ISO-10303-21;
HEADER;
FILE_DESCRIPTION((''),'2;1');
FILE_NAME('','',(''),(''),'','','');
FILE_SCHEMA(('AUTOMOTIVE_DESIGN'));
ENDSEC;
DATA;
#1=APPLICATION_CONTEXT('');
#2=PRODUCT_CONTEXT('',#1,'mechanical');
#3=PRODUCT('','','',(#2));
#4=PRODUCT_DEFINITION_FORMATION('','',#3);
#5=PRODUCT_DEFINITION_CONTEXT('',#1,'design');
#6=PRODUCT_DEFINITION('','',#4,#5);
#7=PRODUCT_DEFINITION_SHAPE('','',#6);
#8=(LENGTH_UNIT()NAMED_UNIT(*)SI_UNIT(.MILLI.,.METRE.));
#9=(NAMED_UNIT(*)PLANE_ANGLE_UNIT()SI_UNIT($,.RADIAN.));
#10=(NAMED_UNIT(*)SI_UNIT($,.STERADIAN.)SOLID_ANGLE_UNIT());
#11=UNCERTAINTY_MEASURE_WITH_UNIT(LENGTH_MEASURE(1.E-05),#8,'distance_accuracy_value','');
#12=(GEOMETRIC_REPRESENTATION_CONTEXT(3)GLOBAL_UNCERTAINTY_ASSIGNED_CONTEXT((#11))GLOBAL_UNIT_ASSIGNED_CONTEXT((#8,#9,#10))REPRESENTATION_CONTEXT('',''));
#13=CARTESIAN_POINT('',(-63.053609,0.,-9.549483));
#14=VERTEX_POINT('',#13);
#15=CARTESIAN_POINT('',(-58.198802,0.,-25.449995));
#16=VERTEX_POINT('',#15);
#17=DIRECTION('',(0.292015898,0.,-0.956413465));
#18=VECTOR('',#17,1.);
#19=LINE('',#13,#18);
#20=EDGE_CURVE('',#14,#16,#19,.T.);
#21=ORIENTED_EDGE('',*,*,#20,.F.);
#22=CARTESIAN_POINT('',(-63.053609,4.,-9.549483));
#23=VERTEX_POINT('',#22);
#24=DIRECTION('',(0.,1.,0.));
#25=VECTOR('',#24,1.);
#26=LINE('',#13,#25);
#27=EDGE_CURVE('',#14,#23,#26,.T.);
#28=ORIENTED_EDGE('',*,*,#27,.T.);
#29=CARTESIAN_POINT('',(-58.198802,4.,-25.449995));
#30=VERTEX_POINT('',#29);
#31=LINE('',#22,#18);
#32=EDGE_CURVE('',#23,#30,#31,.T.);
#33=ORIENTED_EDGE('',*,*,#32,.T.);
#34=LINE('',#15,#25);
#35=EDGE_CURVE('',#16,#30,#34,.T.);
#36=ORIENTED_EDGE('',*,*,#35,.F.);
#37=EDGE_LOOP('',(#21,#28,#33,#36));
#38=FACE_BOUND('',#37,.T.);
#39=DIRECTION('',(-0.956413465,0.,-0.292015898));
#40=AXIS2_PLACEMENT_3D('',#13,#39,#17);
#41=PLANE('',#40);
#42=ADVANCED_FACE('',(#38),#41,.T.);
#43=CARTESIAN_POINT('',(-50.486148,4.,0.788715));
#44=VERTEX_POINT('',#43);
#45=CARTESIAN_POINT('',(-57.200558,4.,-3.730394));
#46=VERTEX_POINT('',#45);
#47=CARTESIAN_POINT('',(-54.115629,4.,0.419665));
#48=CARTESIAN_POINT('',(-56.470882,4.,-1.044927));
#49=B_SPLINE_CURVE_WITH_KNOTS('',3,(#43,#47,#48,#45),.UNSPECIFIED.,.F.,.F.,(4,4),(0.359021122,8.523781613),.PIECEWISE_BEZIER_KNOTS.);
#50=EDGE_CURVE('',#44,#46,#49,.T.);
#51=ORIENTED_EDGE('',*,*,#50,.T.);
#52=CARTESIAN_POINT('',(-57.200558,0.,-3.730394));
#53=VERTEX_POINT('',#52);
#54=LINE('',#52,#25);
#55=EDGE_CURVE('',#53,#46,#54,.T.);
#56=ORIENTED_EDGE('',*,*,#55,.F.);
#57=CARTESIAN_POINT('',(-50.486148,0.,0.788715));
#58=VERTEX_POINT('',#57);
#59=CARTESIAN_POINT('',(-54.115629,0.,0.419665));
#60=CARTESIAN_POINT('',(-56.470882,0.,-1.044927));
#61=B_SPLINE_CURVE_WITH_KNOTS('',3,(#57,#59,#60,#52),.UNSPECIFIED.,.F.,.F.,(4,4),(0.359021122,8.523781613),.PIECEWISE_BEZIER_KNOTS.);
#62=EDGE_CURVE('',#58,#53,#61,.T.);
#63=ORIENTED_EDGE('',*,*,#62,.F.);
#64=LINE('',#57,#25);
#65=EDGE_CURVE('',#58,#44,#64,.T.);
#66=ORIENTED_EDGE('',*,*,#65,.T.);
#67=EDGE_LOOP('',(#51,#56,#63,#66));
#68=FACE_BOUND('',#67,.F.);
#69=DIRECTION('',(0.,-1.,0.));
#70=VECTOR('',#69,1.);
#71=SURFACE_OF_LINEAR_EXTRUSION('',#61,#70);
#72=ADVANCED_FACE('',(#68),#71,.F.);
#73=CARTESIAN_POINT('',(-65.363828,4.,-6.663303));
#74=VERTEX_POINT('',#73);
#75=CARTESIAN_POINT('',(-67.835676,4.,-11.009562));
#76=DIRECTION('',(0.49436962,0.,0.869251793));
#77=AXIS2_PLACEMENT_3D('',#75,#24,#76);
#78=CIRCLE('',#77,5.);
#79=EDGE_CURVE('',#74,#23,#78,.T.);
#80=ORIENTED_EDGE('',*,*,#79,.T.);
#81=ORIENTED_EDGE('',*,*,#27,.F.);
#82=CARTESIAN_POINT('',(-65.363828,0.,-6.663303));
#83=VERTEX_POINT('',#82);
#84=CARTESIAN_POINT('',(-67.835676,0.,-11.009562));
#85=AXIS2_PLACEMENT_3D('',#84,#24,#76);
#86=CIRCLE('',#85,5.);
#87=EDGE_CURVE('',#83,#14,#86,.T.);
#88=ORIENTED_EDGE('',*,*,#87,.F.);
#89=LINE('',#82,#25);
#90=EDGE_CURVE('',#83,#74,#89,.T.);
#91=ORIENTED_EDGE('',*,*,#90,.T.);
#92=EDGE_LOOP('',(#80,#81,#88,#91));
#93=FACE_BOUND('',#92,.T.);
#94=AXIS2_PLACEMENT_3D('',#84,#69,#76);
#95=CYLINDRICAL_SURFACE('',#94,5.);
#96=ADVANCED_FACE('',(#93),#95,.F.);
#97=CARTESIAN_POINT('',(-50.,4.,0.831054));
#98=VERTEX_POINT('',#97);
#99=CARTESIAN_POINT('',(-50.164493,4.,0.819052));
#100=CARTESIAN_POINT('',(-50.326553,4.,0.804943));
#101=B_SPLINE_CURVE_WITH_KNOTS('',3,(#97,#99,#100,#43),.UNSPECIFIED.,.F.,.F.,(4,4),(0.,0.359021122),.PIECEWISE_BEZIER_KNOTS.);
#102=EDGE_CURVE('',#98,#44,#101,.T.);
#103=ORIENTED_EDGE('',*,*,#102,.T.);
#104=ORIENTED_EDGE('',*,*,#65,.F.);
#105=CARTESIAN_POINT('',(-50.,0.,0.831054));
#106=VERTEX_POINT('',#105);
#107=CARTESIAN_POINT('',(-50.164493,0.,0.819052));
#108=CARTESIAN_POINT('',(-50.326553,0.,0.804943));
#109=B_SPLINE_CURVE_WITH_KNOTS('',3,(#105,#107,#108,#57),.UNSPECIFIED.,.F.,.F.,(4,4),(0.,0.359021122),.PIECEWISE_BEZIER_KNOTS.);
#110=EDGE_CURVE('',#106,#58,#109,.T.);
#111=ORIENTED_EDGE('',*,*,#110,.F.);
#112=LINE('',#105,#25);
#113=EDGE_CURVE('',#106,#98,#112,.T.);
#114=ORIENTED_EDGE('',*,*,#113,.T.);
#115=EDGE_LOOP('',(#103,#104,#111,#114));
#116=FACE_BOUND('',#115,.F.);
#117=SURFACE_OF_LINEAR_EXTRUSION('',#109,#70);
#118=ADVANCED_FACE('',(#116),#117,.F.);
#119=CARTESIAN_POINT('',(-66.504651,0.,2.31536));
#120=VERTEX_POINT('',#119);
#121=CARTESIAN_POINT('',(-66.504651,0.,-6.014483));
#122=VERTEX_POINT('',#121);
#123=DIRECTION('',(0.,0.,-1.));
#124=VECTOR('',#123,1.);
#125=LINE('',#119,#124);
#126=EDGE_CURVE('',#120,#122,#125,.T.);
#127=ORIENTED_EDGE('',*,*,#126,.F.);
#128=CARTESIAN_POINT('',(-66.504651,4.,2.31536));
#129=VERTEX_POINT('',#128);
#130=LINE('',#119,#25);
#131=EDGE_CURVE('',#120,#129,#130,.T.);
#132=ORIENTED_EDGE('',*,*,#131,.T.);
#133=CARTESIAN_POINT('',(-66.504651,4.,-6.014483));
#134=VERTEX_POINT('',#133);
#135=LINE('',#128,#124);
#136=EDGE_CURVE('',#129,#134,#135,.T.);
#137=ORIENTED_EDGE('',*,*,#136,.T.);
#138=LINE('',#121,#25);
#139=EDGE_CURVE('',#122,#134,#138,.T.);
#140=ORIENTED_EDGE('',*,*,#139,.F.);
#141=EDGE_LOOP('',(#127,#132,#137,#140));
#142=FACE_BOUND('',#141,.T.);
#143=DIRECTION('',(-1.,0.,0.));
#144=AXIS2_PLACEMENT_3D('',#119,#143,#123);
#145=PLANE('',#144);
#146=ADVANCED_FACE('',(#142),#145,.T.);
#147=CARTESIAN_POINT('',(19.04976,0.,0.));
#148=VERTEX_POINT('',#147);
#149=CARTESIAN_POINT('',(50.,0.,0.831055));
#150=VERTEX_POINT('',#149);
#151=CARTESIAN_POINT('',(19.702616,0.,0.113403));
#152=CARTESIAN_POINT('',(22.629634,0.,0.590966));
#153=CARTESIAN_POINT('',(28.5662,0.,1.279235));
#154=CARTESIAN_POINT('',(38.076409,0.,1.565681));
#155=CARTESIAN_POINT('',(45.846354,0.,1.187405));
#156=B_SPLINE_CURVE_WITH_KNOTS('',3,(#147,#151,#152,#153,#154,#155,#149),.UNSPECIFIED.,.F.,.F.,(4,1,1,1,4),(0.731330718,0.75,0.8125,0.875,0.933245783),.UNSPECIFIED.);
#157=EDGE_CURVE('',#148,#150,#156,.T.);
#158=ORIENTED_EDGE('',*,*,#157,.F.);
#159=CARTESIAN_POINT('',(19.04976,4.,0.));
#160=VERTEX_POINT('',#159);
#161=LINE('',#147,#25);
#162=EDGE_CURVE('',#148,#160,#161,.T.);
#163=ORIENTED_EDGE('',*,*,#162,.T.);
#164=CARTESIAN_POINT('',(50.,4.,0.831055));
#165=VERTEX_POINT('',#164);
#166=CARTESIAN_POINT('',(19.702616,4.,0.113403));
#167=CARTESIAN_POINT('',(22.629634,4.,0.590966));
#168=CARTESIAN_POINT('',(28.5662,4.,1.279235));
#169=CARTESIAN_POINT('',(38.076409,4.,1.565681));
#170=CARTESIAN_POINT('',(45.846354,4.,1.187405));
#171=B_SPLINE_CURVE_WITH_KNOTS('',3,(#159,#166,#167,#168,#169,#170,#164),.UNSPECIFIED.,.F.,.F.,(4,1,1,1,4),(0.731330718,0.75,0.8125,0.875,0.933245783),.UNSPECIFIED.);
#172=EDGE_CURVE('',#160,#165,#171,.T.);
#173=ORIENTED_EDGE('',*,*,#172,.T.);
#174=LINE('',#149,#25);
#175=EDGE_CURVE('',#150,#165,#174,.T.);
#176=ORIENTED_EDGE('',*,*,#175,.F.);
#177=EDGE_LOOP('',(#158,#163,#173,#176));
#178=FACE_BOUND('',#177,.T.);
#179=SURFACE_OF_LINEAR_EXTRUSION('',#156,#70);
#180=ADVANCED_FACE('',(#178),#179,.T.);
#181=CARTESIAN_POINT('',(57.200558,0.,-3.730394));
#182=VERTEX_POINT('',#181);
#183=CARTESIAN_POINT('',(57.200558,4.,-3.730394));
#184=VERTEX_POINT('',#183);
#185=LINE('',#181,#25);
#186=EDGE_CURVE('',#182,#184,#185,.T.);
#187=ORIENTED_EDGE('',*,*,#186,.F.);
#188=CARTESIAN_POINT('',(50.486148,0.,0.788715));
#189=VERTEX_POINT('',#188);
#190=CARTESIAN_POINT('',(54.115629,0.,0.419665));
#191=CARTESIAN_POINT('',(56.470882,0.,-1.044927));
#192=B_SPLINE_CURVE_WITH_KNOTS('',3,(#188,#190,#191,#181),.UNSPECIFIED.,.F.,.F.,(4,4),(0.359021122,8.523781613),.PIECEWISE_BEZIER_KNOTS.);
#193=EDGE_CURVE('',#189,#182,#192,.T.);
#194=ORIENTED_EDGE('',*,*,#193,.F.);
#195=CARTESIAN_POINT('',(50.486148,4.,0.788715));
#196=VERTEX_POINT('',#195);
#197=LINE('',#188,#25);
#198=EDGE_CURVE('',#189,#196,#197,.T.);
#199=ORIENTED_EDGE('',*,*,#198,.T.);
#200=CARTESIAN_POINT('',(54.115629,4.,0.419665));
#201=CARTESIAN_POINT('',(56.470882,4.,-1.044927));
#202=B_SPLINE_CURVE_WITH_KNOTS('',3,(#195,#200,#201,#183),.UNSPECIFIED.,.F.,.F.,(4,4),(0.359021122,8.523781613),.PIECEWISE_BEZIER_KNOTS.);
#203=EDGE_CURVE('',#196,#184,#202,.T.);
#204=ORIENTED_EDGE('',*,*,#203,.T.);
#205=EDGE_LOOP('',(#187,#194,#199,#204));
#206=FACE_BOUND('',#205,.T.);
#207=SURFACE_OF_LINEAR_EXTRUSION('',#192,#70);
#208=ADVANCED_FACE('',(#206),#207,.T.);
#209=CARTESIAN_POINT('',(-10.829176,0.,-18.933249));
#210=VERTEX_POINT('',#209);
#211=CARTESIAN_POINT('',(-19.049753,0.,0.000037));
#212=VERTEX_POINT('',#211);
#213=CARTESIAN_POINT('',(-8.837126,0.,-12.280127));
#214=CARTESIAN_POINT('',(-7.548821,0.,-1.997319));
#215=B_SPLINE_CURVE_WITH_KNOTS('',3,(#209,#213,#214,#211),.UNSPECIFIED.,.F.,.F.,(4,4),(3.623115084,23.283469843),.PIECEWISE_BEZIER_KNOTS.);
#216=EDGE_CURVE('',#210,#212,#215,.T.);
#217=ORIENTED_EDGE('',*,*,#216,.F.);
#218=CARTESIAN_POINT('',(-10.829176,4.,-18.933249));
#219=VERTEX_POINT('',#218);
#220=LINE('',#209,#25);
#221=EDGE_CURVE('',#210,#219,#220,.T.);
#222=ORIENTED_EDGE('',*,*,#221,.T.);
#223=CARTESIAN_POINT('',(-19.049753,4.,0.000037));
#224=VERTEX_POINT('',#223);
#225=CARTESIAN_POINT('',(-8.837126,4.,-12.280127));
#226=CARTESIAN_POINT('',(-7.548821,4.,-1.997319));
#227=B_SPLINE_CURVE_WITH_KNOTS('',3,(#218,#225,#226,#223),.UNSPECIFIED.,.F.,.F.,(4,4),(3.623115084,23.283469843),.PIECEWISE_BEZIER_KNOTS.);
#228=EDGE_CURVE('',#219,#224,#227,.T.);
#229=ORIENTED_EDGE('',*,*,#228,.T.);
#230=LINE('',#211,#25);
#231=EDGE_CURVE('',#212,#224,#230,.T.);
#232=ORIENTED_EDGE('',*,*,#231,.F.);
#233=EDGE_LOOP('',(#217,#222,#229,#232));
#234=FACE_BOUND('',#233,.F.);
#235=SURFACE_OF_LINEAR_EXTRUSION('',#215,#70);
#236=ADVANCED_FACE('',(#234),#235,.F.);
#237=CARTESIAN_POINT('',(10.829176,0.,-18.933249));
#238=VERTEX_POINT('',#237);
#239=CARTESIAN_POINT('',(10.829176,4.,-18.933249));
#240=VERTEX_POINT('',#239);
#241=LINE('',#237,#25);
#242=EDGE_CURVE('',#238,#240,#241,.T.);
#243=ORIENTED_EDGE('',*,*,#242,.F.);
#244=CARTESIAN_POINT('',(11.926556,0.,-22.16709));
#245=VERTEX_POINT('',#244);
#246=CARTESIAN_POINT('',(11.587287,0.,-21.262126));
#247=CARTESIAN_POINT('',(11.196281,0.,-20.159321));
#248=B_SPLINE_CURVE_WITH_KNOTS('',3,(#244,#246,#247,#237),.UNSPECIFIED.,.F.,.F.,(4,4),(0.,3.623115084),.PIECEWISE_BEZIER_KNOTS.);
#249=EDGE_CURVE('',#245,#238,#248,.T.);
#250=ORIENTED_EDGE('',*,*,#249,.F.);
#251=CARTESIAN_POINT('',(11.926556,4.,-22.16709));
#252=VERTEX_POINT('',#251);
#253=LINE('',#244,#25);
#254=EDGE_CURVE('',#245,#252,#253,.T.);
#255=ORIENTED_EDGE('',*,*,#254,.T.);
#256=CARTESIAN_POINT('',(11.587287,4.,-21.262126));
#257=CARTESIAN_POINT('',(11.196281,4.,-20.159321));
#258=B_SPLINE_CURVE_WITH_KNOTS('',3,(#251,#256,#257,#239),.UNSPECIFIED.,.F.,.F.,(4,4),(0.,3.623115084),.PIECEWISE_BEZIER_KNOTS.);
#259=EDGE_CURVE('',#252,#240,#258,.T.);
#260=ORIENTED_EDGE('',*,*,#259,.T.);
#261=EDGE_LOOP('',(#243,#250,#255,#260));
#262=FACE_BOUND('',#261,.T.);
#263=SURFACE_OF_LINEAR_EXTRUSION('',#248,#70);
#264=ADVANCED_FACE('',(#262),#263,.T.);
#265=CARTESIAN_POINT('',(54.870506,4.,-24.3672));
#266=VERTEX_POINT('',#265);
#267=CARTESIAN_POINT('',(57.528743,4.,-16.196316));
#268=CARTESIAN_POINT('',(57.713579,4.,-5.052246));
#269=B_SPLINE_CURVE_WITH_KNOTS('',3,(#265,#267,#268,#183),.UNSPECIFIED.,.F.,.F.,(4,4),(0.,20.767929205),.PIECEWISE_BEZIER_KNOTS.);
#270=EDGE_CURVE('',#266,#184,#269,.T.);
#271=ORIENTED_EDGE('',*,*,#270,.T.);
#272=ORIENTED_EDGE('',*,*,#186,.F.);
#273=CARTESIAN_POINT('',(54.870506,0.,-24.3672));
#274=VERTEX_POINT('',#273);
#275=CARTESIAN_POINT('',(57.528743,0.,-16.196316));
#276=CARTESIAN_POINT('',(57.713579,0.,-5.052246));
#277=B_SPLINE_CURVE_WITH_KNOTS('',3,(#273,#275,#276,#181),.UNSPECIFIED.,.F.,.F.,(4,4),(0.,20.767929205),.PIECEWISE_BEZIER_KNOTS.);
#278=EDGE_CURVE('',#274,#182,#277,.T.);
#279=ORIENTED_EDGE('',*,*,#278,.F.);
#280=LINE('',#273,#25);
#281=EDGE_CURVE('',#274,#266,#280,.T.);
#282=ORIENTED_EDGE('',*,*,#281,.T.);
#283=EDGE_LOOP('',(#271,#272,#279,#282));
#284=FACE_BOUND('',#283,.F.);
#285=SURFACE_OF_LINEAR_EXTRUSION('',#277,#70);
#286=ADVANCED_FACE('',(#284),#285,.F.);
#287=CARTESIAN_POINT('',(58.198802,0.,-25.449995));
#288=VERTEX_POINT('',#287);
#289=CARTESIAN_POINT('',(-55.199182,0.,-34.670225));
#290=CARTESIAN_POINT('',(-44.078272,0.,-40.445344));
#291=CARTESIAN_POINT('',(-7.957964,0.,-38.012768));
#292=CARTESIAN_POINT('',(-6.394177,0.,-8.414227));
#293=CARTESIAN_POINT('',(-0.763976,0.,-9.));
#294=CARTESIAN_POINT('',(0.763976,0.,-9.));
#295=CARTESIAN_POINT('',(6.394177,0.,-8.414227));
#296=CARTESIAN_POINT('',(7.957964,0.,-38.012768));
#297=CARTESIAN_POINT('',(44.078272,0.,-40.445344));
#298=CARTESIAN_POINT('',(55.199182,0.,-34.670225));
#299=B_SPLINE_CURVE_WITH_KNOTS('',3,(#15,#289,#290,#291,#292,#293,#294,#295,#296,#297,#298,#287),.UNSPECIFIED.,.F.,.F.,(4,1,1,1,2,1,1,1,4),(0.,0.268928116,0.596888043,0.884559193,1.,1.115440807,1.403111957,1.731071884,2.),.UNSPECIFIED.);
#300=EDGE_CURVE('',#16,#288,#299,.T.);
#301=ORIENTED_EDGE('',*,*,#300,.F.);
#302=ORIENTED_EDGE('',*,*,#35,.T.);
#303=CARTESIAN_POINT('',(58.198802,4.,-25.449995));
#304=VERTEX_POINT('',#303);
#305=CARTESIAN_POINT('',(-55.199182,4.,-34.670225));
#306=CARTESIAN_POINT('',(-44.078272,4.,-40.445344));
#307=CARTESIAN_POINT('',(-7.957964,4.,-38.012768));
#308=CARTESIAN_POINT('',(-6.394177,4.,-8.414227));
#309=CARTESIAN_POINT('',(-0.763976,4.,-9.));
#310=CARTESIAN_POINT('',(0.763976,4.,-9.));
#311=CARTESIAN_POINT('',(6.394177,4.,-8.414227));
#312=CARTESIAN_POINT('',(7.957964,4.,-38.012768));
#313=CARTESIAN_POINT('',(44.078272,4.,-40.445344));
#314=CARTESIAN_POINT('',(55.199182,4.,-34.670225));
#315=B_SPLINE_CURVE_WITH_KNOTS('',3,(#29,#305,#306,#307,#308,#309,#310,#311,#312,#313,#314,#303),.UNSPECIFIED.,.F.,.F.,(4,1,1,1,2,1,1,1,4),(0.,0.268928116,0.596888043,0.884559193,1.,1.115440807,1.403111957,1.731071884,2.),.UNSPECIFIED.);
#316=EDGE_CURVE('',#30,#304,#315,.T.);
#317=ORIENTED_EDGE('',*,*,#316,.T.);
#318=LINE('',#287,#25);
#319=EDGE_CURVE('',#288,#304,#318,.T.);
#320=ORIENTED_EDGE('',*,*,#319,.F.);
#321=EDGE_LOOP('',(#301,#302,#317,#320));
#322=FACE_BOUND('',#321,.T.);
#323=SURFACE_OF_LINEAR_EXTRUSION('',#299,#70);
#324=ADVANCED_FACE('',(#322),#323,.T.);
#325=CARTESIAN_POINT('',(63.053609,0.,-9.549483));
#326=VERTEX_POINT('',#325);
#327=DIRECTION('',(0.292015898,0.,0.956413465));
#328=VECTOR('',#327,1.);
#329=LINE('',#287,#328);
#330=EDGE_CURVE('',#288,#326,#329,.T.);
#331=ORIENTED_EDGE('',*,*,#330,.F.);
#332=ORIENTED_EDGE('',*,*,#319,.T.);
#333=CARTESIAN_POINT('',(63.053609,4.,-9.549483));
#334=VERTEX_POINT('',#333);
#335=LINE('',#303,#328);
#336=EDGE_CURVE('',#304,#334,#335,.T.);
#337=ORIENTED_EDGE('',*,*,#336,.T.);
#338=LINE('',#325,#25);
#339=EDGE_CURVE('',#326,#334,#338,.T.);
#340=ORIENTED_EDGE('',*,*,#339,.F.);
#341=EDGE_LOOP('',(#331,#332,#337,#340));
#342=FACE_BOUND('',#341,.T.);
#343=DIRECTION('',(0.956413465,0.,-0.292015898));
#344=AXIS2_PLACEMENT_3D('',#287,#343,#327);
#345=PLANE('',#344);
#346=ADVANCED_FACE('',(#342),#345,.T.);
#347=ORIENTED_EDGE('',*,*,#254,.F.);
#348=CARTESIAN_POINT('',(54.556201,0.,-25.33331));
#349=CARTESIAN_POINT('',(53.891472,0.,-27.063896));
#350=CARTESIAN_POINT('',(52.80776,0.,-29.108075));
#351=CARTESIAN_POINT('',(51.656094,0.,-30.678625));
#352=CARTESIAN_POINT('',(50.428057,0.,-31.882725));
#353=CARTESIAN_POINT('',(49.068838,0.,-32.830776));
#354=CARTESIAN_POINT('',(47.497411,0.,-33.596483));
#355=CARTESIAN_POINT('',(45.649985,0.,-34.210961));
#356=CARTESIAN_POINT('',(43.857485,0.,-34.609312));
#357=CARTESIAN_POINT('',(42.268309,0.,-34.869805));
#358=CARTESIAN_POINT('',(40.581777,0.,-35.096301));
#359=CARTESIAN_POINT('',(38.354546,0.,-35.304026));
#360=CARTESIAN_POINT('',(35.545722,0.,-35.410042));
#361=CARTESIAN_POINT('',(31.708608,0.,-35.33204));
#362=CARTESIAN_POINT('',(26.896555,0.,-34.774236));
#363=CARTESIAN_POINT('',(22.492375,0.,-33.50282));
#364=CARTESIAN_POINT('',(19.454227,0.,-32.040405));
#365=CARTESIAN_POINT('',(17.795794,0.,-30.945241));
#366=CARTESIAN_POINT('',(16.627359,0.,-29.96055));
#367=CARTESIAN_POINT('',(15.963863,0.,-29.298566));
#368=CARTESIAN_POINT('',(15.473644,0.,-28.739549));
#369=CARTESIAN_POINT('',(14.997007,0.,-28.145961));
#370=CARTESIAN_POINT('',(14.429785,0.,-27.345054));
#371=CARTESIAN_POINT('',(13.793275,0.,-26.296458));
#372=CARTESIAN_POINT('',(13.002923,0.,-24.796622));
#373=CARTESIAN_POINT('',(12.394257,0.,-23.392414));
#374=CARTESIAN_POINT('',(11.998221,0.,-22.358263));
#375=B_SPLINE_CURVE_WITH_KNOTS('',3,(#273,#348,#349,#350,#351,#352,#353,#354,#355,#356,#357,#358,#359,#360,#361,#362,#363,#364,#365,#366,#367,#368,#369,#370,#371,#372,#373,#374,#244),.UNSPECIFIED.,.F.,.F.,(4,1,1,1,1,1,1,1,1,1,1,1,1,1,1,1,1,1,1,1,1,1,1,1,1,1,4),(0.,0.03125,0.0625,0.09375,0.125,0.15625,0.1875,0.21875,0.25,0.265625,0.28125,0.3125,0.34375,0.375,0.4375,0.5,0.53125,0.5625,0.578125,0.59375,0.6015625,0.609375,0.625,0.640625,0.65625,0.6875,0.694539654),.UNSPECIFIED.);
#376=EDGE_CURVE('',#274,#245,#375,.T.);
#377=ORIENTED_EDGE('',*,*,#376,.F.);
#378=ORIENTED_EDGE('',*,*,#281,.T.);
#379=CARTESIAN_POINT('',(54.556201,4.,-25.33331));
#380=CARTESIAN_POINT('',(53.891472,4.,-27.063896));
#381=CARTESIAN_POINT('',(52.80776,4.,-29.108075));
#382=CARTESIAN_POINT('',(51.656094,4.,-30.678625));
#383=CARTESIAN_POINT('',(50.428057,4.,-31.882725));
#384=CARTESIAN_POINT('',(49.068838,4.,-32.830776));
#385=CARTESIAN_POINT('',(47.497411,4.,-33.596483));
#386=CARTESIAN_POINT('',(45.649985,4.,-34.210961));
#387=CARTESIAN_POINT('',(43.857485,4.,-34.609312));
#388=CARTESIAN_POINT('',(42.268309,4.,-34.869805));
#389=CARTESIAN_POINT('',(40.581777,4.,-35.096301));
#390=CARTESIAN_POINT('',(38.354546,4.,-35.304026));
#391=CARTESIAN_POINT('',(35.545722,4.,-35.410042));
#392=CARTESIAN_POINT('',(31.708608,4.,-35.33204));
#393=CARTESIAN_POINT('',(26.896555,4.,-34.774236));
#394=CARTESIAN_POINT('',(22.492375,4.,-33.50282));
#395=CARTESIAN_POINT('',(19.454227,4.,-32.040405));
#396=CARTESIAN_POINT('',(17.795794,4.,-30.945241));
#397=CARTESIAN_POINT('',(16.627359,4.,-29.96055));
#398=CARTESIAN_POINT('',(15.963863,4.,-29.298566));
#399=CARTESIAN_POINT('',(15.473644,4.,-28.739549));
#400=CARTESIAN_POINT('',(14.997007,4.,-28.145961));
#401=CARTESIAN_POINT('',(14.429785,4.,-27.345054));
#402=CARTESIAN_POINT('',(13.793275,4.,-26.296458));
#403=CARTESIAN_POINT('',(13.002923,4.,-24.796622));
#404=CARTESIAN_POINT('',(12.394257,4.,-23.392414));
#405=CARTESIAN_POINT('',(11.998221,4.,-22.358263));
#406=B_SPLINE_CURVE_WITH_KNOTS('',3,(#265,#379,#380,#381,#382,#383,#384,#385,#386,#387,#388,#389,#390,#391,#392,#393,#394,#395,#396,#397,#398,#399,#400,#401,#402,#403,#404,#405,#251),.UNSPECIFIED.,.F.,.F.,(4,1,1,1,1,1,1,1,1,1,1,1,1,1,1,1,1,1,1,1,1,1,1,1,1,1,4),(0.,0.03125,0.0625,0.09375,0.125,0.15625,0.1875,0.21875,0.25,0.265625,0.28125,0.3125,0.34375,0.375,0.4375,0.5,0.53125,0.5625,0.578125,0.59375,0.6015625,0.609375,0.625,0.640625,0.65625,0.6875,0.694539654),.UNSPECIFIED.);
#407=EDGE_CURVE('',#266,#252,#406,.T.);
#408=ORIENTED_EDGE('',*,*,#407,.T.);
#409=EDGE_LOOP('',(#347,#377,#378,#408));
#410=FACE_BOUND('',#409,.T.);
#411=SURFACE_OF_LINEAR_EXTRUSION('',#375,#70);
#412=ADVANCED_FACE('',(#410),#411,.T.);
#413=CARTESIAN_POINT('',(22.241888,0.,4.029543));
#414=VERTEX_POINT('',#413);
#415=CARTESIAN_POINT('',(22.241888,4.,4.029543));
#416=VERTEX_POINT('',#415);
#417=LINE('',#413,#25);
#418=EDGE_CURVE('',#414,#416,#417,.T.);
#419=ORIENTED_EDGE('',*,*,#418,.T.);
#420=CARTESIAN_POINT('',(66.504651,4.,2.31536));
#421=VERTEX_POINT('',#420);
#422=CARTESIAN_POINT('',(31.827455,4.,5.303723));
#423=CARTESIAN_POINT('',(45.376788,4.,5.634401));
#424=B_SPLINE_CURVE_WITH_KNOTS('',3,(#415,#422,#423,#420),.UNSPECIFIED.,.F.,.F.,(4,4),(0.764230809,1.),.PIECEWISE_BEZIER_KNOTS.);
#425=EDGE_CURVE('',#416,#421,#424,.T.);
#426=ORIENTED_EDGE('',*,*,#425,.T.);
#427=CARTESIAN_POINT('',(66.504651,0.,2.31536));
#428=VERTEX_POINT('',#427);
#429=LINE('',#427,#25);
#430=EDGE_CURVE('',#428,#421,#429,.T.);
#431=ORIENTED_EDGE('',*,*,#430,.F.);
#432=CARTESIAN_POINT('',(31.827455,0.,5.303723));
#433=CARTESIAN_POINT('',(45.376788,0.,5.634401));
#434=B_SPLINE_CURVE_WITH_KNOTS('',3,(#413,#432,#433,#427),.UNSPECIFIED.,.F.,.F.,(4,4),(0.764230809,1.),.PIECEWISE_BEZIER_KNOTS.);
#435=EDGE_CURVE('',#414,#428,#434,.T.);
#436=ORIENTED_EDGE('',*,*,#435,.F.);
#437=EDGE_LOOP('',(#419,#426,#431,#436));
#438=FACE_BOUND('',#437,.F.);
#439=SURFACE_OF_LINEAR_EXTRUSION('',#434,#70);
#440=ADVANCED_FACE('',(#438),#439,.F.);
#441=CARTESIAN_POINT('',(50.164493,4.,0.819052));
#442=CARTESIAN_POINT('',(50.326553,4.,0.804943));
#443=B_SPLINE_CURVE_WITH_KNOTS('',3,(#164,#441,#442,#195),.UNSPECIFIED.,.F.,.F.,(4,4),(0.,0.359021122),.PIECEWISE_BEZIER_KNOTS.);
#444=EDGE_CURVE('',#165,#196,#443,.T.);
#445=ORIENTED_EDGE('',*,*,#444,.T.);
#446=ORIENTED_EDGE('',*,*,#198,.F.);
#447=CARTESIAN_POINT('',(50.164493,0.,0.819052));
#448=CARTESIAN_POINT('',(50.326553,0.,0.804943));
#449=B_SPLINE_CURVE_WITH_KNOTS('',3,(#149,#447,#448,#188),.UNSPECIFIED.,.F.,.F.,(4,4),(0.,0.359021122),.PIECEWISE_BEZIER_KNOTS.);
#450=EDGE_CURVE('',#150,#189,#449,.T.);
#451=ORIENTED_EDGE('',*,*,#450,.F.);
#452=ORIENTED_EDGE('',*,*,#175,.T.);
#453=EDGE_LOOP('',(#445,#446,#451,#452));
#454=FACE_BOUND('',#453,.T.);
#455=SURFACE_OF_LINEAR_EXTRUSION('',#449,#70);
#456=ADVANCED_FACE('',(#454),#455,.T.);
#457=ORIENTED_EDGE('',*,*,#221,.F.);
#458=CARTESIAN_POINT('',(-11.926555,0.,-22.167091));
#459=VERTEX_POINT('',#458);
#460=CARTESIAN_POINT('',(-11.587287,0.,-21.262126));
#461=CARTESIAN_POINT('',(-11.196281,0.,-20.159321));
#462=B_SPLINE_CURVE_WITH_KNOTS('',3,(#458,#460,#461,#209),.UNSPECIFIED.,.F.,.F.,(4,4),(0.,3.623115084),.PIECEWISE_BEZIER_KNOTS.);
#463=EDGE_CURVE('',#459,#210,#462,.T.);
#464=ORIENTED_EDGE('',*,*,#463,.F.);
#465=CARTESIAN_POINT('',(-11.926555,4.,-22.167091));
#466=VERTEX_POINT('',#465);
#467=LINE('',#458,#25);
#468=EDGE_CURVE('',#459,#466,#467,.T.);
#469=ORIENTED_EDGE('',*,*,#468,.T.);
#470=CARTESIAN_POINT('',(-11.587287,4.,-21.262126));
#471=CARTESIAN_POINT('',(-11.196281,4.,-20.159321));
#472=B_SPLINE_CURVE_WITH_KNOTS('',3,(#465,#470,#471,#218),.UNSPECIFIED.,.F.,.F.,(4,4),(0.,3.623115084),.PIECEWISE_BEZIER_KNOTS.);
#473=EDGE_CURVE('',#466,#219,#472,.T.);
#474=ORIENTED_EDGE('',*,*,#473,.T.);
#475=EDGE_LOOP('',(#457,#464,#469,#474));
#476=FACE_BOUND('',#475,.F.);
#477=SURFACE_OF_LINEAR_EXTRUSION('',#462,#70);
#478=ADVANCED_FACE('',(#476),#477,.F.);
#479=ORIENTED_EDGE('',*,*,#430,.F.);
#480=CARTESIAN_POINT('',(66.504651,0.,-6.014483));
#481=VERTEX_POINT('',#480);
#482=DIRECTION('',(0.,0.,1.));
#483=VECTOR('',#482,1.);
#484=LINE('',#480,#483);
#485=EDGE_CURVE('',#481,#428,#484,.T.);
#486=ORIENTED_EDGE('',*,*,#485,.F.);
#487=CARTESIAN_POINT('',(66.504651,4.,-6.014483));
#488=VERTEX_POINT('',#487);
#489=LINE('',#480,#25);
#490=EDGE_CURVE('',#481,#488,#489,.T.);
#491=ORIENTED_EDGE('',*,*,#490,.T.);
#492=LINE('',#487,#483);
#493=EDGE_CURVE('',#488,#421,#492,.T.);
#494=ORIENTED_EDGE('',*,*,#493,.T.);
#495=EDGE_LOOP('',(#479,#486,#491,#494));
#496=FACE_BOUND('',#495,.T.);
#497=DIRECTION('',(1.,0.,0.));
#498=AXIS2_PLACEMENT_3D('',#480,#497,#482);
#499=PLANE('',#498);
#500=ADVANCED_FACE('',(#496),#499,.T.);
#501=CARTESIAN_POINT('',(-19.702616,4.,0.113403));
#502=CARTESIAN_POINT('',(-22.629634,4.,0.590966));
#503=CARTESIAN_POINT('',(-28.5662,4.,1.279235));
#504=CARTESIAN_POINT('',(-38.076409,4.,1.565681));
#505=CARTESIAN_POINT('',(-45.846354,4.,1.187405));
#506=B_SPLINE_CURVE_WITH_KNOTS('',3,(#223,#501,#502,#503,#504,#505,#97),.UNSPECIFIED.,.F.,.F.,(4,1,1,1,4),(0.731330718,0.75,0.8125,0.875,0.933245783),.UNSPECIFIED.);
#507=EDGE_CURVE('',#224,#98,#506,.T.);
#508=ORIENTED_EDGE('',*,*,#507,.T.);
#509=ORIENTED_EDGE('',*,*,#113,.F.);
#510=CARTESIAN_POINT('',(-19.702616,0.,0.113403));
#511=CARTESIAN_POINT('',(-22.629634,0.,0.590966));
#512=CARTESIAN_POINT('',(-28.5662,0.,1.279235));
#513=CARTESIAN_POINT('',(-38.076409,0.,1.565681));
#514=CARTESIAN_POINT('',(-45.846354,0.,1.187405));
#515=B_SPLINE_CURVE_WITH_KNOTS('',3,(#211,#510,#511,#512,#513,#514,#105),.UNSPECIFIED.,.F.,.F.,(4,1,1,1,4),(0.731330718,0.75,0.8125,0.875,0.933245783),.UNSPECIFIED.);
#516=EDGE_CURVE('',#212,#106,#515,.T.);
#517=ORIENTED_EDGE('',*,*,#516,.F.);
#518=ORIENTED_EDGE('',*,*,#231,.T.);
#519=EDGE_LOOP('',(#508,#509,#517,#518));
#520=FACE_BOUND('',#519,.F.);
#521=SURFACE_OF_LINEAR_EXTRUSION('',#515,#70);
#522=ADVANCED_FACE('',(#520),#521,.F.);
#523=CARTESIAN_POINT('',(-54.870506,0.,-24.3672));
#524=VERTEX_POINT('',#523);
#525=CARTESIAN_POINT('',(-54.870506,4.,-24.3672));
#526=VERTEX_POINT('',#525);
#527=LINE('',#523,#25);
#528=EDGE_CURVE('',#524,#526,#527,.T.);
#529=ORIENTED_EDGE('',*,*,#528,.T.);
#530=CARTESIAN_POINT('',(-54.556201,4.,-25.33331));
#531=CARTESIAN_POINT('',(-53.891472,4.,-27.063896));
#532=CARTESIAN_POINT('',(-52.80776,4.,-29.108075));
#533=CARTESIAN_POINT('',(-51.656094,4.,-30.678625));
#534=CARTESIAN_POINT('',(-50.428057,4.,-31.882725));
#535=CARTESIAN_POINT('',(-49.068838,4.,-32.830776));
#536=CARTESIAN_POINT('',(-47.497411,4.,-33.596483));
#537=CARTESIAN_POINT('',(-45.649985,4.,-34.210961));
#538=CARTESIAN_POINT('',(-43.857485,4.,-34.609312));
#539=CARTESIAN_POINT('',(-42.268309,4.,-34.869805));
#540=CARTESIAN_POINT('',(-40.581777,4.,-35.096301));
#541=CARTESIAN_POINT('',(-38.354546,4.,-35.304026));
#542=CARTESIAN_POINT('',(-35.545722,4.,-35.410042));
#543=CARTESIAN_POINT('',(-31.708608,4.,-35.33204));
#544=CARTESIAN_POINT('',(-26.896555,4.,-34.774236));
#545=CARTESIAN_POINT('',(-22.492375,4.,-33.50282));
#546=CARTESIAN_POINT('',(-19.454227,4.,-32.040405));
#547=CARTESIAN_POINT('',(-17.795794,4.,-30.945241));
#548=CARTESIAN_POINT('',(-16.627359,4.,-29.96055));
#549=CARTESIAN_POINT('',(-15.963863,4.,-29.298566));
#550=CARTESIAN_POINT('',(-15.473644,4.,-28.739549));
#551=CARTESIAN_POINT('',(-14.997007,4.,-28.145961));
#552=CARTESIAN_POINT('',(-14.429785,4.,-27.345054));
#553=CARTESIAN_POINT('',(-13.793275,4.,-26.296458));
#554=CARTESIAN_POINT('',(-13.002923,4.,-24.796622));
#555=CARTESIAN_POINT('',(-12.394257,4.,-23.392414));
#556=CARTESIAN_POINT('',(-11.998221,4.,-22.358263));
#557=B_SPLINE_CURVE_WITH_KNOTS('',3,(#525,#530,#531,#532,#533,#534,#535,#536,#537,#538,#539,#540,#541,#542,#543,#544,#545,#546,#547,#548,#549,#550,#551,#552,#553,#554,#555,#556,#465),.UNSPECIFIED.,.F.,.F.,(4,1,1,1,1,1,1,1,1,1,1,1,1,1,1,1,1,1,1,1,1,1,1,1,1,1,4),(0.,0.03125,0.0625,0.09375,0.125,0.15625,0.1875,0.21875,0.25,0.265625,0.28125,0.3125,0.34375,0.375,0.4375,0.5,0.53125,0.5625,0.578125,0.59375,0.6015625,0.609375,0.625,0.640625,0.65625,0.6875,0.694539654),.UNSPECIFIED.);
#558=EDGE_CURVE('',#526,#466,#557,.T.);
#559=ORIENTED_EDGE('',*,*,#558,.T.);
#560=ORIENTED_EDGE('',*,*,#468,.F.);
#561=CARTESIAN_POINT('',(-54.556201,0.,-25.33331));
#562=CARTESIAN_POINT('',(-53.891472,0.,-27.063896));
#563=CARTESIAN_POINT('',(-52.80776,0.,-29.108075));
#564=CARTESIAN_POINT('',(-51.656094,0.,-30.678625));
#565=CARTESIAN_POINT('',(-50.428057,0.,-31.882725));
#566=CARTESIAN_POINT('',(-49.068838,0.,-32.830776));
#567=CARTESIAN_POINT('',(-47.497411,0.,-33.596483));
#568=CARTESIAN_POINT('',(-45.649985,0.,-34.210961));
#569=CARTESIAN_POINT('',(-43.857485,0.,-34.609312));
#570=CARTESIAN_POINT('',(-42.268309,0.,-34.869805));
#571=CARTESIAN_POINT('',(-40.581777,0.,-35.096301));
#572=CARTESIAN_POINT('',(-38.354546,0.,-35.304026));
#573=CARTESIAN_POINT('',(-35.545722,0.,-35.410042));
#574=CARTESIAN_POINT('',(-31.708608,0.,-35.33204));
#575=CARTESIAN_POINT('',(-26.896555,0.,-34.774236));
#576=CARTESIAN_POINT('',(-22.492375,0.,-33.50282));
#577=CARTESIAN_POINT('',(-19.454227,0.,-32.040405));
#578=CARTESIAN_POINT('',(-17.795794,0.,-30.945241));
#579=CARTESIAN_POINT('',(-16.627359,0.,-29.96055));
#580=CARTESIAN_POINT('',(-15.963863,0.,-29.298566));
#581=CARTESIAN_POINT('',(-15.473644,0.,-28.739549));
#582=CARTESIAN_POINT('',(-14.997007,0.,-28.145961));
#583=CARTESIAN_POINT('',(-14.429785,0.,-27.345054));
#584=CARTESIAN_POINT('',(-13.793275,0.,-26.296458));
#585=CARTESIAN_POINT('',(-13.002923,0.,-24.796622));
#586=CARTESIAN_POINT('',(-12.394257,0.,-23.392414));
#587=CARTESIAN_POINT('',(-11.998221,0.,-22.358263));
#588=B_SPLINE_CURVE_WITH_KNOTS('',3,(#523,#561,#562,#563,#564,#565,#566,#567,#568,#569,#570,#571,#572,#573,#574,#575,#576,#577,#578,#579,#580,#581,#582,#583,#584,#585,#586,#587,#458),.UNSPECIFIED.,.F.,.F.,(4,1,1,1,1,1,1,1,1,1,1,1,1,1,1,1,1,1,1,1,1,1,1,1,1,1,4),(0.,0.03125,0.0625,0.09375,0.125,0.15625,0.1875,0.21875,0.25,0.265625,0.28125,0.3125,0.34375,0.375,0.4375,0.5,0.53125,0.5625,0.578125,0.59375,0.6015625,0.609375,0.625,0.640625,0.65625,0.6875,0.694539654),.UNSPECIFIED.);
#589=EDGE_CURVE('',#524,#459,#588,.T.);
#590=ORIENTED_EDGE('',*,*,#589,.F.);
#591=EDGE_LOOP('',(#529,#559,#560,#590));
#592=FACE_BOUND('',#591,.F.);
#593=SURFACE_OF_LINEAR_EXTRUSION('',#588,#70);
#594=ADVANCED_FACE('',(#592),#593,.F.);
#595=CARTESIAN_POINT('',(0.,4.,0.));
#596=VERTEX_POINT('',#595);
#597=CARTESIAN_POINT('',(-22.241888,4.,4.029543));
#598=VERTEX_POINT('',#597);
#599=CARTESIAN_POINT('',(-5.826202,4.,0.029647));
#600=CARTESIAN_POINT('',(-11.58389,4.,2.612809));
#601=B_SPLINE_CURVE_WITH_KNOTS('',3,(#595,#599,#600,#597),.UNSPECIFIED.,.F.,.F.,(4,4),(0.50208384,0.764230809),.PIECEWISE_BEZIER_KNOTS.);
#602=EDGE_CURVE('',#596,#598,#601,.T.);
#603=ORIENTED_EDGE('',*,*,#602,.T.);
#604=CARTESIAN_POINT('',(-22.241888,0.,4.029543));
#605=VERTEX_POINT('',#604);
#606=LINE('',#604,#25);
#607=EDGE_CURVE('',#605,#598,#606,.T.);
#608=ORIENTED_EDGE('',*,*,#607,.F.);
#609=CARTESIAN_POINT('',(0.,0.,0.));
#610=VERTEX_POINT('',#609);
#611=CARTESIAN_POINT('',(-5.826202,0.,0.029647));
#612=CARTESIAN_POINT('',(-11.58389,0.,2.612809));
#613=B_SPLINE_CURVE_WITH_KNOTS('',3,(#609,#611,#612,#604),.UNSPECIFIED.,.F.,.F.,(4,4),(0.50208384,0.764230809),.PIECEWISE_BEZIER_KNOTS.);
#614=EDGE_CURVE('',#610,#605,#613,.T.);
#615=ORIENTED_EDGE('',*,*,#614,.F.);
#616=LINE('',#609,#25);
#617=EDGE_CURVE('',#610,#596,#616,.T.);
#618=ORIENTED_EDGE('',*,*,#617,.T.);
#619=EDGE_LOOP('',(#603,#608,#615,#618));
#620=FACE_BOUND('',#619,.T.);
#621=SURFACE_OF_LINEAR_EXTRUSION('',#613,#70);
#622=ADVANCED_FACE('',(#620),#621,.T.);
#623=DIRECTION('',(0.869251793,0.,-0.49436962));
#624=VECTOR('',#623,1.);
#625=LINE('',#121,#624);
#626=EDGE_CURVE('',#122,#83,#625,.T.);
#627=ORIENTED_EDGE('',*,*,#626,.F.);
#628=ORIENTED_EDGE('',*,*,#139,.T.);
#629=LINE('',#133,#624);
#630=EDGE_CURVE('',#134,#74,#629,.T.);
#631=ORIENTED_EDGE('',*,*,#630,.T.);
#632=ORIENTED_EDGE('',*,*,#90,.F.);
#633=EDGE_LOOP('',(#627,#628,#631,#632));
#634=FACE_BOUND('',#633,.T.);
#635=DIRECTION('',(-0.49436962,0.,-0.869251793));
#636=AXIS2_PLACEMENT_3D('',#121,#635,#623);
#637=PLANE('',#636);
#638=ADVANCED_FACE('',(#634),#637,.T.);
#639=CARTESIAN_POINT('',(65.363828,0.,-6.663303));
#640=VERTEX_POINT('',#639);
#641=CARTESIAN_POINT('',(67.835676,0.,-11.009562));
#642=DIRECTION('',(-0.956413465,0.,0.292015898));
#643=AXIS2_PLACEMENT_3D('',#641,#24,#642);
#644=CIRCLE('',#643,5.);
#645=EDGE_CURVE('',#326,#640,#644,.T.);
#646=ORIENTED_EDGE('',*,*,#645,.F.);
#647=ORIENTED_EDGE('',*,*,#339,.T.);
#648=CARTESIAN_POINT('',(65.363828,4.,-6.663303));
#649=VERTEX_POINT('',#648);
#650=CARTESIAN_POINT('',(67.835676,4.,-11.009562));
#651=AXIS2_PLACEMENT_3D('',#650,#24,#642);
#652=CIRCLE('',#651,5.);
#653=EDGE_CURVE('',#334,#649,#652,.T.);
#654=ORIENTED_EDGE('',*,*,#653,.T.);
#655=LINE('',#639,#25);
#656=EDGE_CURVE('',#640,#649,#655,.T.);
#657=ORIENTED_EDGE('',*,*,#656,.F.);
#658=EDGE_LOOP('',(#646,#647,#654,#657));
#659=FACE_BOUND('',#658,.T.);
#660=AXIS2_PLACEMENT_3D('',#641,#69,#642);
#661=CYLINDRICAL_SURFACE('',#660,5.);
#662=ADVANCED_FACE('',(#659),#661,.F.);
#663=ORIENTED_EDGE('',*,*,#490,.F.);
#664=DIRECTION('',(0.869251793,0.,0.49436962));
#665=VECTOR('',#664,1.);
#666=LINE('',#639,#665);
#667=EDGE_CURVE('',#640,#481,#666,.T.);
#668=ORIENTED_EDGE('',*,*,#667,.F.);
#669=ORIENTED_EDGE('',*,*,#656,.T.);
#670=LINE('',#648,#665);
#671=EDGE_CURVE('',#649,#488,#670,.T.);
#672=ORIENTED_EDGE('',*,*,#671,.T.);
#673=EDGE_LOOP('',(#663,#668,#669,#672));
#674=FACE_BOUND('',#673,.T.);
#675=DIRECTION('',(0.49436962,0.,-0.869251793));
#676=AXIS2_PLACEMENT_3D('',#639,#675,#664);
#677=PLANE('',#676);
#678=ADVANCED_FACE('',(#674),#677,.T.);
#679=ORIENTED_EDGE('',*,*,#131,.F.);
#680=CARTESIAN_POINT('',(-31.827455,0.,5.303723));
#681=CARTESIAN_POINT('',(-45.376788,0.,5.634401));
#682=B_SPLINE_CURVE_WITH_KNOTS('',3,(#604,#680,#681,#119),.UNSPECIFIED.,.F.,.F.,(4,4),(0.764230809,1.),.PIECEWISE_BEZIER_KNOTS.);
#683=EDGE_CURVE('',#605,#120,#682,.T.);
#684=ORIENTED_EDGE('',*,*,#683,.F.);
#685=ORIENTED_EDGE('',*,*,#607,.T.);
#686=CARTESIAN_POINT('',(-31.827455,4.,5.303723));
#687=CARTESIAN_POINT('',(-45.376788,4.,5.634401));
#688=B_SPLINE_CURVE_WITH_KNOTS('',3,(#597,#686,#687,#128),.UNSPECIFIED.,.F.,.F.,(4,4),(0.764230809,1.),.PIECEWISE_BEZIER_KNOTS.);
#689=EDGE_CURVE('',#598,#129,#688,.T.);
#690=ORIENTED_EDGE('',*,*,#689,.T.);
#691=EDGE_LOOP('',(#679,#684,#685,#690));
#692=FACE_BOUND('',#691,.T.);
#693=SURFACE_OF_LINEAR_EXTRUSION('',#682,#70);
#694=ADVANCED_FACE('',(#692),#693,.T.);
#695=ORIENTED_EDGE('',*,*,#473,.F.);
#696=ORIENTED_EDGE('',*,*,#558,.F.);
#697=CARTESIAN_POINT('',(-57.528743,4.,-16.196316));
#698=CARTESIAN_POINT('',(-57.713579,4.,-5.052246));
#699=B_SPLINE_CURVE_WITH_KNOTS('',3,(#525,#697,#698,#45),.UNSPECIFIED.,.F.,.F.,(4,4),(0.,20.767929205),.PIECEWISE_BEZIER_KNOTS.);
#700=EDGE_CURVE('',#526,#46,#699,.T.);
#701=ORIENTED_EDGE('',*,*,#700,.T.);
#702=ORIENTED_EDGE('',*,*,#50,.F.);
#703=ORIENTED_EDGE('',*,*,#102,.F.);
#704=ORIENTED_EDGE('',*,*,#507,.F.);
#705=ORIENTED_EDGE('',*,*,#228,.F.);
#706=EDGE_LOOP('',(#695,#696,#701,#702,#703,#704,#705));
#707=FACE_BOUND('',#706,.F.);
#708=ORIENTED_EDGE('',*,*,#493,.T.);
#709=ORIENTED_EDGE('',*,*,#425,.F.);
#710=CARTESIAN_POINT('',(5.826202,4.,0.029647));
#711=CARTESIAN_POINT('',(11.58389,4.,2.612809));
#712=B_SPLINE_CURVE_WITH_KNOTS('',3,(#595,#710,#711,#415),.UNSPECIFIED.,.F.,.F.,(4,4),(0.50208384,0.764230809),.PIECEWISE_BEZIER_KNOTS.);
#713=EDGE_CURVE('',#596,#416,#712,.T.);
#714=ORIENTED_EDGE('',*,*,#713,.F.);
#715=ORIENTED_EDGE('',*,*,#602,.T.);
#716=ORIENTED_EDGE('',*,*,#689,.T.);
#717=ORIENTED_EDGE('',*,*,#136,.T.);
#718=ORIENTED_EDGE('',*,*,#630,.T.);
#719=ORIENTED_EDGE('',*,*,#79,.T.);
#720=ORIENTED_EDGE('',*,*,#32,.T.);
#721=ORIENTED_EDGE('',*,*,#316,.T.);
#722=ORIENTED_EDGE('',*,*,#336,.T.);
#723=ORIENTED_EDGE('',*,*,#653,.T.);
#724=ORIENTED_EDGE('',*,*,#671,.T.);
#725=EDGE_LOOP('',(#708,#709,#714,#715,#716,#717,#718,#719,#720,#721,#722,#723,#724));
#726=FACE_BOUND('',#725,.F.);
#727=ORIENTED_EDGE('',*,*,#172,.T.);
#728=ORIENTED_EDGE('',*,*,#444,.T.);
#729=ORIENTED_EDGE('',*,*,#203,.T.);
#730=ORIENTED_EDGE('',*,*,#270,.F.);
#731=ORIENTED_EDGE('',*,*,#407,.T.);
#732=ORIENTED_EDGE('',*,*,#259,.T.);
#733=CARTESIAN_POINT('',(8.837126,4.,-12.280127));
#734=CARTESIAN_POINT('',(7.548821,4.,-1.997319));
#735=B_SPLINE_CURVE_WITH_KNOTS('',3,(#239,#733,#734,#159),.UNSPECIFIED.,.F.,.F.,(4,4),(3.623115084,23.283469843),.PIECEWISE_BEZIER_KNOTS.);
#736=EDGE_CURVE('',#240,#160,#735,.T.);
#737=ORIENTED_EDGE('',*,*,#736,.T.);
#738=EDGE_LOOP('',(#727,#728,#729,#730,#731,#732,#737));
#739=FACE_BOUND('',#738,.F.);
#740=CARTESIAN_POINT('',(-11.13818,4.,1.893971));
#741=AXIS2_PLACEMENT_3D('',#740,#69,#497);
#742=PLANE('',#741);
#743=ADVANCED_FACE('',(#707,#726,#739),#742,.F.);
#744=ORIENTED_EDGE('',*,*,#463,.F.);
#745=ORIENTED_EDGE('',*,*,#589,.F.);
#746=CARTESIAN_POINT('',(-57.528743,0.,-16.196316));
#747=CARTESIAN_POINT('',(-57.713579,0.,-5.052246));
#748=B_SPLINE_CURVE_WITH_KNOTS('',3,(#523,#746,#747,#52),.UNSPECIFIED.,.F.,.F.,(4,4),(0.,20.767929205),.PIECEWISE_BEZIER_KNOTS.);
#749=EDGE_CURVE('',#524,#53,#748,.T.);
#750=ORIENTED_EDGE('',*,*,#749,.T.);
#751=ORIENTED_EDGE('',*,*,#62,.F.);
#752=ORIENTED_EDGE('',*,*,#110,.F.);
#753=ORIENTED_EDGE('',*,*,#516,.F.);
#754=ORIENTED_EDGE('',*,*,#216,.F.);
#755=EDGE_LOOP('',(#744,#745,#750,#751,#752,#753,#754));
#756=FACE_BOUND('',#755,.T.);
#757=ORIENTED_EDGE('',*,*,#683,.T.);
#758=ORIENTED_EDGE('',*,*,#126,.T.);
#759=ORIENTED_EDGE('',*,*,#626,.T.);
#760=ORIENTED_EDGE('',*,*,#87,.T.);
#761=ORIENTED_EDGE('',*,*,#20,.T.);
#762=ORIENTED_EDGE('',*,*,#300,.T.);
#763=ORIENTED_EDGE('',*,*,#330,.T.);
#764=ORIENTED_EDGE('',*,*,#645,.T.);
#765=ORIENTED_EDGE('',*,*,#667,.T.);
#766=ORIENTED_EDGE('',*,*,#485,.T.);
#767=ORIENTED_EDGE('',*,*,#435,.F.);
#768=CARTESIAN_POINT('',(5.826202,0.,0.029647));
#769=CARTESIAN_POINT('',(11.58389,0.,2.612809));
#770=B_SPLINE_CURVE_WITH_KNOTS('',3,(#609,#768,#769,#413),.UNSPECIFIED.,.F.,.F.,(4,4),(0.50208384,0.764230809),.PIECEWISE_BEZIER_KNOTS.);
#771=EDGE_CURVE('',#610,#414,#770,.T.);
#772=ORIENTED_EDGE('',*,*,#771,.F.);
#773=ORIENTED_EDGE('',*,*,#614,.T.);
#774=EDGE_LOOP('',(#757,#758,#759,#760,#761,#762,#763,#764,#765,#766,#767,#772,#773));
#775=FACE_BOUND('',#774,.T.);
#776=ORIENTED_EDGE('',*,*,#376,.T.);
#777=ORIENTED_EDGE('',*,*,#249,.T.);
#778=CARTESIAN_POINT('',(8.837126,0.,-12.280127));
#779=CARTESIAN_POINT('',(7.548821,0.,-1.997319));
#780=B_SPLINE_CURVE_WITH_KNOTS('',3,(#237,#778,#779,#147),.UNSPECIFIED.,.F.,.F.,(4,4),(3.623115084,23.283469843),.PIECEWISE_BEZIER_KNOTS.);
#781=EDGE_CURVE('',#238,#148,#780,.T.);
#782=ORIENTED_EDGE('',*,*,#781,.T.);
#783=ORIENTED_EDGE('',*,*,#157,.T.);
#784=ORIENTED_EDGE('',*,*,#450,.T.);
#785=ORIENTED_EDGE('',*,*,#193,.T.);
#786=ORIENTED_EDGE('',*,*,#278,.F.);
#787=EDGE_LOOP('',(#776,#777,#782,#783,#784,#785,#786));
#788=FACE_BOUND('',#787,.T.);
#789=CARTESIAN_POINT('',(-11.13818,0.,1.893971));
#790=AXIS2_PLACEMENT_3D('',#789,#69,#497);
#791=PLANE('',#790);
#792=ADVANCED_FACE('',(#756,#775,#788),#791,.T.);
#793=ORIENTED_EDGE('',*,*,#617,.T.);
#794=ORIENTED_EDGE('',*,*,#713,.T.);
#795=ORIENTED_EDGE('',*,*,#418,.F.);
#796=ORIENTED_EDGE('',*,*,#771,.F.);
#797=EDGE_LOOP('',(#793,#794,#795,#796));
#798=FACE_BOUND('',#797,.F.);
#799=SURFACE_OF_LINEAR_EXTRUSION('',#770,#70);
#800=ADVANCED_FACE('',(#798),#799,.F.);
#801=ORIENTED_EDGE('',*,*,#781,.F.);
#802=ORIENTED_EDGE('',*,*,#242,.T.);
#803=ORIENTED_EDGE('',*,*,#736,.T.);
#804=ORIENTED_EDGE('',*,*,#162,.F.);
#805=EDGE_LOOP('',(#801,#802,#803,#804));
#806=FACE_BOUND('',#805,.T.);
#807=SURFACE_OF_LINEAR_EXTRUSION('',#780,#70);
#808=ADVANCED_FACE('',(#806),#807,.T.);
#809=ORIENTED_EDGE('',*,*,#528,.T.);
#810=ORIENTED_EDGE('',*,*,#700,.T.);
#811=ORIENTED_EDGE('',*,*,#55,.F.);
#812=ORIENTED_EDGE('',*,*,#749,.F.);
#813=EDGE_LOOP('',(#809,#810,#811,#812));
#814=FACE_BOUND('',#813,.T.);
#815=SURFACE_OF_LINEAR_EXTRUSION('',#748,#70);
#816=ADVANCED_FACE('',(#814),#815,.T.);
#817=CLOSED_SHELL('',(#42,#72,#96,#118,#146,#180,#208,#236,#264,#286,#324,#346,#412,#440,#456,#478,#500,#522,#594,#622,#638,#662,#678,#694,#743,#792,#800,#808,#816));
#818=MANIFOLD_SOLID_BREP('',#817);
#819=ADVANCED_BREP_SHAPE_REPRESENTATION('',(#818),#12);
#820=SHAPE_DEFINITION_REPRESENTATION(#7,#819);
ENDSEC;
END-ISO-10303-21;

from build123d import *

# Parameters (mm, degrees)
F1_DEPTH = 4


# Not quite as in the source:
# - ends of sketch curves that miss each other by under 0.0002 mm in the source are joined
# - the dataset's text gives a spline's control points without its knots; the knots are read off the source's solid


with BuildPart() as f1:
    # F0 (on Front) → F1 (new body)
    with BuildSketch(Plane.XZ):
        with BuildLine():
            add(Edge.make_bspline(
                [(-1.43e-08, 1e-10), (-5.8262018138, 0.0296473946), (-11.5838900798, 2.612809362), (-22.2418875805, 4.0295433421)],
                knots=[0.5020838395, 0.5020838395, 0.5020838395, 0.5020838395, 0.7642308089, 0.7642308089, 0.7642308089, 0.7642308089], degree=3))
            add(Edge.make_bspline(
                [(-22.2418875765, 4.02954334), (-11.651072785, 2.4644040002), (-5.7916843406, -0.0294717417), (-1.43e-08, -1e-10)],
                knots=[0.2414899659, 0.2414899659, 0.2414899659, 0.2414899659, 0.5020838395, 0.5020838395, 0.5020838395, 0.5020838395], degree=3))
        make_face()
        with BuildLine():
            add(Edge.make_bspline(
                [(-22.2418875765, 4.02954334), (-11.651072785, 2.4644040002), (-5.7916843406, -0.0294717417), (-1.43e-08, -1e-10)],
                knots=[0.2414899659, 0.2414899659, 0.2414899659, 0.2414899659, 0.5020838395, 0.5020838395, 0.5020838395, 0.5020838395], degree=3))
            add(Edge.make_bspline(
                [(-22.2418875765, 4.02954334), (-31.827454998, 5.3037225738), (-45.3767875341, 5.6344008281), (-66.5046507984, 2.3153595296)],
                knots=[0.7642308089, 0.7642308089, 0.7642308089, 0.7642308089, 1, 1, 1, 1], degree=3))
            Line((-66.5046507984, 2.3153595296), (-66.5046507984, -6.0144829642))
            Line((-66.5046507984, -6.0144829642), (-65.3638279858, -6.6633031854))
            ThreePointArc((-65.3638279858, -6.6633031854), (-63.9321737821, -7.8850350212), (-63.0536087618, -9.5494826602))
            Line((-63.0536087618, -9.5494826602), (-58.1988021054, -25.4499952459))
            add(Edge.make_bspline(
                [(-58.1988021054, -25.4499952459), (-55.1991816547, -34.6702252334), (-44.0782715853, -40.4453435252), (-7.957963564, -38.0127679481), (-6.3941774716, -8.4142274022), (-0.7639763252, -9), (0, -9)],
                knots=[0, 0, 0, 0, 0.2689281161, 0.596888043, 0.884559193, 1, 1, 1, 1], degree=3))
            add(Edge.make_bspline(
                [(58.1988021054, -25.4499952459), (55.1991816547, -34.6702252334), (44.0782715853, -40.4453435252), (7.957963564, -38.0127679481), (6.3941774716, -8.4142274022), (0.7639763252, -9), (0, -9)],
                knots=[0, 0, 0, 0, 0.2689281161, 0.596888043, 0.884559193, 1, 1, 1, 1], degree=3))
            Line((58.1988021054, -25.4499952459), (63.0536087618, -9.5494826602))
            ThreePointArc((63.0536087618, -9.5494826602), (63.9321737821, -7.8850350212), (65.3638279858, -6.6633031854))
            Line((65.3638279858, -6.6633031854), (66.5046507984, -6.0144829642))
            Line((66.5046507984, -6.0144829642), (66.5046507984, 2.3153595296))
            add(Edge.make_bspline(
                [(22.2418875765, 4.02954334), (31.827454998, 5.3037225738), (45.3767875341, 5.6344008281), (66.5046507984, 2.3153595296)],
                knots=[0.7642308089, 0.7642308089, 0.7642308089, 0.7642308089, 1, 1, 1, 1], degree=3))
            add(Edge.make_bspline(
                [(22.2418875765, 4.02954334), (11.651072785, 2.4644040002), (5.7916843261, -0.0294717479), (-1.43e-08, 1e-10)],
                knots=[0.2414899659, 0.2414899659, 0.2414899659, 0.2414899659, 0.5020838395, 0.5020838395, 0.5020838395, 0.5020838395], degree=3))
        make_face()
        with BuildLine():
            add(Edge.make_bspline(
                [(-11.9265545389, -22.1670907577), (-11.5872866729, -21.2621257789), (-11.1962812507, -20.1593212109), (-10.8291757398, -18.933248538)],
                knots=[0, 0, 0, 0, 3.6231150837, 3.6231150837, 3.6231150837, 3.6231150837], degree=3))
            add(Edge.make_bspline(
                [(-54.8705061926, -24.3671996433), (-54.5562010662, -25.3333103894), (-53.8914718378, -27.063896226), (-52.8077601753, -29.1080753626), (-51.656094325, -30.6786246118), (-50.4280570032, -31.8827250088), (-49.0688382809, -32.8307757364), (-47.4974111469, -33.5964826314), (-45.6499849097, -34.2109611227), (-43.8574847004, -34.6093123189), (-42.2683088875, -34.8698049076), (-40.5817771148, -35.096300949), (-38.3545464684, -35.3040262976), (-35.5457216974, -35.4100418068), (-31.7086076313, -35.3320398478), (-26.8965546018, -34.7742361344), (-22.4923746975, -33.5028198227), (-19.4542274718, -32.0404045665), (-17.7957940999, -30.945241443), (-16.6273594788, -29.9605503291), (-15.9638632092, -29.2985661836), (-15.4736438559, -28.7395490718), (-14.9970074694, -28.1459612443), (-14.4297847511, -27.3450540446), (-13.7932753373, -26.2964579639), (-13.0029229552, -24.7966224837), (-12.3942573657, -23.3924139645), (-11.9982208893, -22.3582632342), (-11.9265545389, -22.1670907577)],
                knots=[0, 0, 0, 0, 0.03125, 0.0625, 0.09375, 0.125, 0.15625, 0.1875, 0.21875, 0.25, 0.265625, 0.28125, 0.3125, 0.34375, 0.375, 0.4375, 0.5, 0.53125, 0.5625, 0.578125, 0.59375, 0.6015625, 0.609375, 0.625, 0.640625, 0.65625, 0.6875, 0.694539654, 0.694539654, 0.694539654, 0.694539654], degree=3))
            add(Edge.make_bspline(
                [(-54.8705061926, -24.3671996433), (-57.5287425278, -16.1963157682), (-57.7135793865, -5.0522456877), (-57.2005584836, -3.730394179)],
                knots=[0, 0, 0, 0, 20.7679292047, 20.7679292047, 20.7679292047, 20.7679292047], degree=3))
            add(Edge.make_bspline(
                [(-50.4861483498, 0.7887146304), (-54.1156288275, 0.4196645954), (-56.4708815987, -1.0449266358), (-57.2005584836, -3.730394179)],
                knots=[0.3590211224, 0.3590211224, 0.3590211224, 0.3590211224, 8.5237816125, 8.5237816125, 8.5237816125, 8.5237816125], degree=3))
            add(Edge.make_bspline(
                [(-50, 0.8310541109), (-50.164493305, 0.819052119), (-50.3265527124, 0.8049425109), (-50.4861483498, 0.7887146304)],
                knots=[0, 0, 0, 0, 0.3590211224, 0.3590211224, 0.3590211224, 0.3590211224], degree=3))
            add(Edge.make_bspline(
                [(-19.0497534433, 3.74384e-05), (-19.7026158101, 0.1134028314), (-22.629633653, 0.5909661284), (-28.5662001971, 1.2792345618), (-38.0764085436, 1.5656807502), (-45.8463540717, 1.187404519), (-50, 0.8310541109)],
                knots=[0.7313307183, 0.7313307183, 0.7313307183, 0.7313307183, 0.75, 0.8125, 0.875, 0.9332457829, 0.9332457829, 0.9332457829, 0.9332457829], degree=3))
            add(Edge.make_bspline(
                [(-10.8291757398, -18.933248538), (-8.8371262434, -12.2801273552), (-7.5488207908, -1.9973192902), (-19.0497534433, 3.74384e-05)],
                knots=[3.6231150837, 3.6231150837, 3.6231150837, 3.6231150837, 23.2834698427, 23.2834698427, 23.2834698427, 23.2834698427], degree=3))
        make_face(mode=Mode.SUBTRACT)
        with BuildLine():
            add(Edge.make_bspline(
                [(54.8705061926, -24.3671996433), (57.5287425278, -16.1963157682), (57.7135793865, -5.0522456877), (57.2005584836, -3.730394179)],
                knots=[0, 0, 0, 0, 20.7679292047, 20.7679292047, 20.7679292047, 20.7679292047], degree=3))
            add(Edge.make_bspline(
                [(54.8705061926, -24.3671996433), (54.5562010662, -25.3333103894), (53.8914718378, -27.063896226), (52.8077601753, -29.1080753626), (51.656094325, -30.6786246118), (50.4280570032, -31.8827250088), (49.0688382809, -32.8307757364), (47.4974111469, -33.5964826314), (45.6499849097, -34.2109611227), (43.8574847004, -34.6093123189), (42.2683088875, -34.8698049076), (40.5817771148, -35.096300949), (38.3545464684, -35.3040262976), (35.5457216974, -35.4100418068), (31.7086076313, -35.3320398478), (26.8965546018, -34.7742361344), (22.4923746975, -33.5028198227), (19.4542274718, -32.0404045665), (17.7957940999, -30.945241443), (16.6273594788, -29.9605503291), (15.9638632092, -29.2985661836), (15.4736438559, -28.7395490718), (14.9970074694, -28.1459612443), (14.4297847511, -27.3450540446), (13.7932753373, -26.2964579639), (13.0029229552, -24.7966224837), (12.3942573657, -23.3924139645), (11.9982208893, -22.3582632342), (11.9265559241, -22.1670902385)],
                knots=[0, 0, 0, 0, 0.03125, 0.0625, 0.09375, 0.125, 0.15625, 0.1875, 0.21875, 0.25, 0.265625, 0.28125, 0.3125, 0.34375, 0.375, 0.4375, 0.5, 0.53125, 0.5625, 0.578125, 0.59375, 0.6015625, 0.609375, 0.625, 0.640625, 0.65625, 0.6875, 0.694539654, 0.694539654, 0.694539654, 0.694539654], degree=3))
            add(Edge.make_bspline(
                [(11.9265559241, -22.1670902385), (11.5872866729, -21.2621257789), (11.1962812507, -20.1593212109), (10.8291757398, -18.933248538)],
                knots=[0, 0, 0, 0, 3.6231150837, 3.6231150837, 3.6231150837, 3.6231150837], degree=3))
            add(Edge.make_bspline(
                [(10.8291757398, -18.933248538), (8.8371262434, -12.2801273552), (7.5488207908, -1.9973192902), (19.0497599446, 0)],
                knots=[3.6231150837, 3.6231150837, 3.6231150837, 3.6231150837, 23.2834698427, 23.2834698427, 23.2834698427, 23.2834698427], degree=3))
            add(Edge.make_bspline(
                [(19.0497599446, 0), (19.7026158101, 0.1134028314), (22.629633653, 0.5909661284), (28.5662001971, 1.2792345618), (38.0764085436, 1.5656807502), (45.8463540717, 1.187404519), (50.0000000976, 0.8310552491)],
                knots=[0.7313307183, 0.7313307183, 0.7313307183, 0.7313307183, 0.75, 0.8125, 0.875, 0.9332457829, 0.9332457829, 0.9332457829, 0.9332457829], degree=3))
            add(Edge.make_bspline(
                [(50.0000000976, 0.8310552491), (50.164493305, 0.819052119), (50.3265527124, 0.8049425109), (50.4861483498, 0.7887146304)],
                knots=[0, 0, 0, 0, 0.3590211224, 0.3590211224, 0.3590211224, 0.3590211224], degree=3))
            add(Edge.make_bspline(
                [(50.4861483498, 0.7887146304), (54.1156288275, 0.4196645954), (56.4708815987, -1.0449266358), (57.2005584836, -3.730394179)],
                knots=[0.3590211224, 0.3590211224, 0.3590211224, 0.3590211224, 8.5237816125, 8.5237816125, 8.5237816125, 8.5237816125], degree=3))
        make_face(mode=Mode.SUBTRACT)
        with BuildLine():
            add(Edge.make_bspline(
                [(-1.43e-08, -1e-10), (5.8262017929, 0.0296473883), (11.5838900664, 2.612809356), (22.2418875725, 4.0295433379)],
                knots=[0.5020838395, 0.5020838395, 0.5020838395, 0.5020838395, 0.7642308089, 0.7642308089, 0.7642308089, 0.7642308089], degree=3))
            add(Edge.make_bspline(
                [(22.2418875765, 4.02954334), (11.651072785, 2.4644040002), (5.7916843261, -0.0294717479), (-1.43e-08, 1e-10)],
                knots=[0.2414899659, 0.2414899659, 0.2414899659, 0.2414899659, 0.5020838395, 0.5020838395, 0.5020838395, 0.5020838395], degree=3))
        make_face()
    extrude(amount=-F1_DEPTH)


solid = f1.part
